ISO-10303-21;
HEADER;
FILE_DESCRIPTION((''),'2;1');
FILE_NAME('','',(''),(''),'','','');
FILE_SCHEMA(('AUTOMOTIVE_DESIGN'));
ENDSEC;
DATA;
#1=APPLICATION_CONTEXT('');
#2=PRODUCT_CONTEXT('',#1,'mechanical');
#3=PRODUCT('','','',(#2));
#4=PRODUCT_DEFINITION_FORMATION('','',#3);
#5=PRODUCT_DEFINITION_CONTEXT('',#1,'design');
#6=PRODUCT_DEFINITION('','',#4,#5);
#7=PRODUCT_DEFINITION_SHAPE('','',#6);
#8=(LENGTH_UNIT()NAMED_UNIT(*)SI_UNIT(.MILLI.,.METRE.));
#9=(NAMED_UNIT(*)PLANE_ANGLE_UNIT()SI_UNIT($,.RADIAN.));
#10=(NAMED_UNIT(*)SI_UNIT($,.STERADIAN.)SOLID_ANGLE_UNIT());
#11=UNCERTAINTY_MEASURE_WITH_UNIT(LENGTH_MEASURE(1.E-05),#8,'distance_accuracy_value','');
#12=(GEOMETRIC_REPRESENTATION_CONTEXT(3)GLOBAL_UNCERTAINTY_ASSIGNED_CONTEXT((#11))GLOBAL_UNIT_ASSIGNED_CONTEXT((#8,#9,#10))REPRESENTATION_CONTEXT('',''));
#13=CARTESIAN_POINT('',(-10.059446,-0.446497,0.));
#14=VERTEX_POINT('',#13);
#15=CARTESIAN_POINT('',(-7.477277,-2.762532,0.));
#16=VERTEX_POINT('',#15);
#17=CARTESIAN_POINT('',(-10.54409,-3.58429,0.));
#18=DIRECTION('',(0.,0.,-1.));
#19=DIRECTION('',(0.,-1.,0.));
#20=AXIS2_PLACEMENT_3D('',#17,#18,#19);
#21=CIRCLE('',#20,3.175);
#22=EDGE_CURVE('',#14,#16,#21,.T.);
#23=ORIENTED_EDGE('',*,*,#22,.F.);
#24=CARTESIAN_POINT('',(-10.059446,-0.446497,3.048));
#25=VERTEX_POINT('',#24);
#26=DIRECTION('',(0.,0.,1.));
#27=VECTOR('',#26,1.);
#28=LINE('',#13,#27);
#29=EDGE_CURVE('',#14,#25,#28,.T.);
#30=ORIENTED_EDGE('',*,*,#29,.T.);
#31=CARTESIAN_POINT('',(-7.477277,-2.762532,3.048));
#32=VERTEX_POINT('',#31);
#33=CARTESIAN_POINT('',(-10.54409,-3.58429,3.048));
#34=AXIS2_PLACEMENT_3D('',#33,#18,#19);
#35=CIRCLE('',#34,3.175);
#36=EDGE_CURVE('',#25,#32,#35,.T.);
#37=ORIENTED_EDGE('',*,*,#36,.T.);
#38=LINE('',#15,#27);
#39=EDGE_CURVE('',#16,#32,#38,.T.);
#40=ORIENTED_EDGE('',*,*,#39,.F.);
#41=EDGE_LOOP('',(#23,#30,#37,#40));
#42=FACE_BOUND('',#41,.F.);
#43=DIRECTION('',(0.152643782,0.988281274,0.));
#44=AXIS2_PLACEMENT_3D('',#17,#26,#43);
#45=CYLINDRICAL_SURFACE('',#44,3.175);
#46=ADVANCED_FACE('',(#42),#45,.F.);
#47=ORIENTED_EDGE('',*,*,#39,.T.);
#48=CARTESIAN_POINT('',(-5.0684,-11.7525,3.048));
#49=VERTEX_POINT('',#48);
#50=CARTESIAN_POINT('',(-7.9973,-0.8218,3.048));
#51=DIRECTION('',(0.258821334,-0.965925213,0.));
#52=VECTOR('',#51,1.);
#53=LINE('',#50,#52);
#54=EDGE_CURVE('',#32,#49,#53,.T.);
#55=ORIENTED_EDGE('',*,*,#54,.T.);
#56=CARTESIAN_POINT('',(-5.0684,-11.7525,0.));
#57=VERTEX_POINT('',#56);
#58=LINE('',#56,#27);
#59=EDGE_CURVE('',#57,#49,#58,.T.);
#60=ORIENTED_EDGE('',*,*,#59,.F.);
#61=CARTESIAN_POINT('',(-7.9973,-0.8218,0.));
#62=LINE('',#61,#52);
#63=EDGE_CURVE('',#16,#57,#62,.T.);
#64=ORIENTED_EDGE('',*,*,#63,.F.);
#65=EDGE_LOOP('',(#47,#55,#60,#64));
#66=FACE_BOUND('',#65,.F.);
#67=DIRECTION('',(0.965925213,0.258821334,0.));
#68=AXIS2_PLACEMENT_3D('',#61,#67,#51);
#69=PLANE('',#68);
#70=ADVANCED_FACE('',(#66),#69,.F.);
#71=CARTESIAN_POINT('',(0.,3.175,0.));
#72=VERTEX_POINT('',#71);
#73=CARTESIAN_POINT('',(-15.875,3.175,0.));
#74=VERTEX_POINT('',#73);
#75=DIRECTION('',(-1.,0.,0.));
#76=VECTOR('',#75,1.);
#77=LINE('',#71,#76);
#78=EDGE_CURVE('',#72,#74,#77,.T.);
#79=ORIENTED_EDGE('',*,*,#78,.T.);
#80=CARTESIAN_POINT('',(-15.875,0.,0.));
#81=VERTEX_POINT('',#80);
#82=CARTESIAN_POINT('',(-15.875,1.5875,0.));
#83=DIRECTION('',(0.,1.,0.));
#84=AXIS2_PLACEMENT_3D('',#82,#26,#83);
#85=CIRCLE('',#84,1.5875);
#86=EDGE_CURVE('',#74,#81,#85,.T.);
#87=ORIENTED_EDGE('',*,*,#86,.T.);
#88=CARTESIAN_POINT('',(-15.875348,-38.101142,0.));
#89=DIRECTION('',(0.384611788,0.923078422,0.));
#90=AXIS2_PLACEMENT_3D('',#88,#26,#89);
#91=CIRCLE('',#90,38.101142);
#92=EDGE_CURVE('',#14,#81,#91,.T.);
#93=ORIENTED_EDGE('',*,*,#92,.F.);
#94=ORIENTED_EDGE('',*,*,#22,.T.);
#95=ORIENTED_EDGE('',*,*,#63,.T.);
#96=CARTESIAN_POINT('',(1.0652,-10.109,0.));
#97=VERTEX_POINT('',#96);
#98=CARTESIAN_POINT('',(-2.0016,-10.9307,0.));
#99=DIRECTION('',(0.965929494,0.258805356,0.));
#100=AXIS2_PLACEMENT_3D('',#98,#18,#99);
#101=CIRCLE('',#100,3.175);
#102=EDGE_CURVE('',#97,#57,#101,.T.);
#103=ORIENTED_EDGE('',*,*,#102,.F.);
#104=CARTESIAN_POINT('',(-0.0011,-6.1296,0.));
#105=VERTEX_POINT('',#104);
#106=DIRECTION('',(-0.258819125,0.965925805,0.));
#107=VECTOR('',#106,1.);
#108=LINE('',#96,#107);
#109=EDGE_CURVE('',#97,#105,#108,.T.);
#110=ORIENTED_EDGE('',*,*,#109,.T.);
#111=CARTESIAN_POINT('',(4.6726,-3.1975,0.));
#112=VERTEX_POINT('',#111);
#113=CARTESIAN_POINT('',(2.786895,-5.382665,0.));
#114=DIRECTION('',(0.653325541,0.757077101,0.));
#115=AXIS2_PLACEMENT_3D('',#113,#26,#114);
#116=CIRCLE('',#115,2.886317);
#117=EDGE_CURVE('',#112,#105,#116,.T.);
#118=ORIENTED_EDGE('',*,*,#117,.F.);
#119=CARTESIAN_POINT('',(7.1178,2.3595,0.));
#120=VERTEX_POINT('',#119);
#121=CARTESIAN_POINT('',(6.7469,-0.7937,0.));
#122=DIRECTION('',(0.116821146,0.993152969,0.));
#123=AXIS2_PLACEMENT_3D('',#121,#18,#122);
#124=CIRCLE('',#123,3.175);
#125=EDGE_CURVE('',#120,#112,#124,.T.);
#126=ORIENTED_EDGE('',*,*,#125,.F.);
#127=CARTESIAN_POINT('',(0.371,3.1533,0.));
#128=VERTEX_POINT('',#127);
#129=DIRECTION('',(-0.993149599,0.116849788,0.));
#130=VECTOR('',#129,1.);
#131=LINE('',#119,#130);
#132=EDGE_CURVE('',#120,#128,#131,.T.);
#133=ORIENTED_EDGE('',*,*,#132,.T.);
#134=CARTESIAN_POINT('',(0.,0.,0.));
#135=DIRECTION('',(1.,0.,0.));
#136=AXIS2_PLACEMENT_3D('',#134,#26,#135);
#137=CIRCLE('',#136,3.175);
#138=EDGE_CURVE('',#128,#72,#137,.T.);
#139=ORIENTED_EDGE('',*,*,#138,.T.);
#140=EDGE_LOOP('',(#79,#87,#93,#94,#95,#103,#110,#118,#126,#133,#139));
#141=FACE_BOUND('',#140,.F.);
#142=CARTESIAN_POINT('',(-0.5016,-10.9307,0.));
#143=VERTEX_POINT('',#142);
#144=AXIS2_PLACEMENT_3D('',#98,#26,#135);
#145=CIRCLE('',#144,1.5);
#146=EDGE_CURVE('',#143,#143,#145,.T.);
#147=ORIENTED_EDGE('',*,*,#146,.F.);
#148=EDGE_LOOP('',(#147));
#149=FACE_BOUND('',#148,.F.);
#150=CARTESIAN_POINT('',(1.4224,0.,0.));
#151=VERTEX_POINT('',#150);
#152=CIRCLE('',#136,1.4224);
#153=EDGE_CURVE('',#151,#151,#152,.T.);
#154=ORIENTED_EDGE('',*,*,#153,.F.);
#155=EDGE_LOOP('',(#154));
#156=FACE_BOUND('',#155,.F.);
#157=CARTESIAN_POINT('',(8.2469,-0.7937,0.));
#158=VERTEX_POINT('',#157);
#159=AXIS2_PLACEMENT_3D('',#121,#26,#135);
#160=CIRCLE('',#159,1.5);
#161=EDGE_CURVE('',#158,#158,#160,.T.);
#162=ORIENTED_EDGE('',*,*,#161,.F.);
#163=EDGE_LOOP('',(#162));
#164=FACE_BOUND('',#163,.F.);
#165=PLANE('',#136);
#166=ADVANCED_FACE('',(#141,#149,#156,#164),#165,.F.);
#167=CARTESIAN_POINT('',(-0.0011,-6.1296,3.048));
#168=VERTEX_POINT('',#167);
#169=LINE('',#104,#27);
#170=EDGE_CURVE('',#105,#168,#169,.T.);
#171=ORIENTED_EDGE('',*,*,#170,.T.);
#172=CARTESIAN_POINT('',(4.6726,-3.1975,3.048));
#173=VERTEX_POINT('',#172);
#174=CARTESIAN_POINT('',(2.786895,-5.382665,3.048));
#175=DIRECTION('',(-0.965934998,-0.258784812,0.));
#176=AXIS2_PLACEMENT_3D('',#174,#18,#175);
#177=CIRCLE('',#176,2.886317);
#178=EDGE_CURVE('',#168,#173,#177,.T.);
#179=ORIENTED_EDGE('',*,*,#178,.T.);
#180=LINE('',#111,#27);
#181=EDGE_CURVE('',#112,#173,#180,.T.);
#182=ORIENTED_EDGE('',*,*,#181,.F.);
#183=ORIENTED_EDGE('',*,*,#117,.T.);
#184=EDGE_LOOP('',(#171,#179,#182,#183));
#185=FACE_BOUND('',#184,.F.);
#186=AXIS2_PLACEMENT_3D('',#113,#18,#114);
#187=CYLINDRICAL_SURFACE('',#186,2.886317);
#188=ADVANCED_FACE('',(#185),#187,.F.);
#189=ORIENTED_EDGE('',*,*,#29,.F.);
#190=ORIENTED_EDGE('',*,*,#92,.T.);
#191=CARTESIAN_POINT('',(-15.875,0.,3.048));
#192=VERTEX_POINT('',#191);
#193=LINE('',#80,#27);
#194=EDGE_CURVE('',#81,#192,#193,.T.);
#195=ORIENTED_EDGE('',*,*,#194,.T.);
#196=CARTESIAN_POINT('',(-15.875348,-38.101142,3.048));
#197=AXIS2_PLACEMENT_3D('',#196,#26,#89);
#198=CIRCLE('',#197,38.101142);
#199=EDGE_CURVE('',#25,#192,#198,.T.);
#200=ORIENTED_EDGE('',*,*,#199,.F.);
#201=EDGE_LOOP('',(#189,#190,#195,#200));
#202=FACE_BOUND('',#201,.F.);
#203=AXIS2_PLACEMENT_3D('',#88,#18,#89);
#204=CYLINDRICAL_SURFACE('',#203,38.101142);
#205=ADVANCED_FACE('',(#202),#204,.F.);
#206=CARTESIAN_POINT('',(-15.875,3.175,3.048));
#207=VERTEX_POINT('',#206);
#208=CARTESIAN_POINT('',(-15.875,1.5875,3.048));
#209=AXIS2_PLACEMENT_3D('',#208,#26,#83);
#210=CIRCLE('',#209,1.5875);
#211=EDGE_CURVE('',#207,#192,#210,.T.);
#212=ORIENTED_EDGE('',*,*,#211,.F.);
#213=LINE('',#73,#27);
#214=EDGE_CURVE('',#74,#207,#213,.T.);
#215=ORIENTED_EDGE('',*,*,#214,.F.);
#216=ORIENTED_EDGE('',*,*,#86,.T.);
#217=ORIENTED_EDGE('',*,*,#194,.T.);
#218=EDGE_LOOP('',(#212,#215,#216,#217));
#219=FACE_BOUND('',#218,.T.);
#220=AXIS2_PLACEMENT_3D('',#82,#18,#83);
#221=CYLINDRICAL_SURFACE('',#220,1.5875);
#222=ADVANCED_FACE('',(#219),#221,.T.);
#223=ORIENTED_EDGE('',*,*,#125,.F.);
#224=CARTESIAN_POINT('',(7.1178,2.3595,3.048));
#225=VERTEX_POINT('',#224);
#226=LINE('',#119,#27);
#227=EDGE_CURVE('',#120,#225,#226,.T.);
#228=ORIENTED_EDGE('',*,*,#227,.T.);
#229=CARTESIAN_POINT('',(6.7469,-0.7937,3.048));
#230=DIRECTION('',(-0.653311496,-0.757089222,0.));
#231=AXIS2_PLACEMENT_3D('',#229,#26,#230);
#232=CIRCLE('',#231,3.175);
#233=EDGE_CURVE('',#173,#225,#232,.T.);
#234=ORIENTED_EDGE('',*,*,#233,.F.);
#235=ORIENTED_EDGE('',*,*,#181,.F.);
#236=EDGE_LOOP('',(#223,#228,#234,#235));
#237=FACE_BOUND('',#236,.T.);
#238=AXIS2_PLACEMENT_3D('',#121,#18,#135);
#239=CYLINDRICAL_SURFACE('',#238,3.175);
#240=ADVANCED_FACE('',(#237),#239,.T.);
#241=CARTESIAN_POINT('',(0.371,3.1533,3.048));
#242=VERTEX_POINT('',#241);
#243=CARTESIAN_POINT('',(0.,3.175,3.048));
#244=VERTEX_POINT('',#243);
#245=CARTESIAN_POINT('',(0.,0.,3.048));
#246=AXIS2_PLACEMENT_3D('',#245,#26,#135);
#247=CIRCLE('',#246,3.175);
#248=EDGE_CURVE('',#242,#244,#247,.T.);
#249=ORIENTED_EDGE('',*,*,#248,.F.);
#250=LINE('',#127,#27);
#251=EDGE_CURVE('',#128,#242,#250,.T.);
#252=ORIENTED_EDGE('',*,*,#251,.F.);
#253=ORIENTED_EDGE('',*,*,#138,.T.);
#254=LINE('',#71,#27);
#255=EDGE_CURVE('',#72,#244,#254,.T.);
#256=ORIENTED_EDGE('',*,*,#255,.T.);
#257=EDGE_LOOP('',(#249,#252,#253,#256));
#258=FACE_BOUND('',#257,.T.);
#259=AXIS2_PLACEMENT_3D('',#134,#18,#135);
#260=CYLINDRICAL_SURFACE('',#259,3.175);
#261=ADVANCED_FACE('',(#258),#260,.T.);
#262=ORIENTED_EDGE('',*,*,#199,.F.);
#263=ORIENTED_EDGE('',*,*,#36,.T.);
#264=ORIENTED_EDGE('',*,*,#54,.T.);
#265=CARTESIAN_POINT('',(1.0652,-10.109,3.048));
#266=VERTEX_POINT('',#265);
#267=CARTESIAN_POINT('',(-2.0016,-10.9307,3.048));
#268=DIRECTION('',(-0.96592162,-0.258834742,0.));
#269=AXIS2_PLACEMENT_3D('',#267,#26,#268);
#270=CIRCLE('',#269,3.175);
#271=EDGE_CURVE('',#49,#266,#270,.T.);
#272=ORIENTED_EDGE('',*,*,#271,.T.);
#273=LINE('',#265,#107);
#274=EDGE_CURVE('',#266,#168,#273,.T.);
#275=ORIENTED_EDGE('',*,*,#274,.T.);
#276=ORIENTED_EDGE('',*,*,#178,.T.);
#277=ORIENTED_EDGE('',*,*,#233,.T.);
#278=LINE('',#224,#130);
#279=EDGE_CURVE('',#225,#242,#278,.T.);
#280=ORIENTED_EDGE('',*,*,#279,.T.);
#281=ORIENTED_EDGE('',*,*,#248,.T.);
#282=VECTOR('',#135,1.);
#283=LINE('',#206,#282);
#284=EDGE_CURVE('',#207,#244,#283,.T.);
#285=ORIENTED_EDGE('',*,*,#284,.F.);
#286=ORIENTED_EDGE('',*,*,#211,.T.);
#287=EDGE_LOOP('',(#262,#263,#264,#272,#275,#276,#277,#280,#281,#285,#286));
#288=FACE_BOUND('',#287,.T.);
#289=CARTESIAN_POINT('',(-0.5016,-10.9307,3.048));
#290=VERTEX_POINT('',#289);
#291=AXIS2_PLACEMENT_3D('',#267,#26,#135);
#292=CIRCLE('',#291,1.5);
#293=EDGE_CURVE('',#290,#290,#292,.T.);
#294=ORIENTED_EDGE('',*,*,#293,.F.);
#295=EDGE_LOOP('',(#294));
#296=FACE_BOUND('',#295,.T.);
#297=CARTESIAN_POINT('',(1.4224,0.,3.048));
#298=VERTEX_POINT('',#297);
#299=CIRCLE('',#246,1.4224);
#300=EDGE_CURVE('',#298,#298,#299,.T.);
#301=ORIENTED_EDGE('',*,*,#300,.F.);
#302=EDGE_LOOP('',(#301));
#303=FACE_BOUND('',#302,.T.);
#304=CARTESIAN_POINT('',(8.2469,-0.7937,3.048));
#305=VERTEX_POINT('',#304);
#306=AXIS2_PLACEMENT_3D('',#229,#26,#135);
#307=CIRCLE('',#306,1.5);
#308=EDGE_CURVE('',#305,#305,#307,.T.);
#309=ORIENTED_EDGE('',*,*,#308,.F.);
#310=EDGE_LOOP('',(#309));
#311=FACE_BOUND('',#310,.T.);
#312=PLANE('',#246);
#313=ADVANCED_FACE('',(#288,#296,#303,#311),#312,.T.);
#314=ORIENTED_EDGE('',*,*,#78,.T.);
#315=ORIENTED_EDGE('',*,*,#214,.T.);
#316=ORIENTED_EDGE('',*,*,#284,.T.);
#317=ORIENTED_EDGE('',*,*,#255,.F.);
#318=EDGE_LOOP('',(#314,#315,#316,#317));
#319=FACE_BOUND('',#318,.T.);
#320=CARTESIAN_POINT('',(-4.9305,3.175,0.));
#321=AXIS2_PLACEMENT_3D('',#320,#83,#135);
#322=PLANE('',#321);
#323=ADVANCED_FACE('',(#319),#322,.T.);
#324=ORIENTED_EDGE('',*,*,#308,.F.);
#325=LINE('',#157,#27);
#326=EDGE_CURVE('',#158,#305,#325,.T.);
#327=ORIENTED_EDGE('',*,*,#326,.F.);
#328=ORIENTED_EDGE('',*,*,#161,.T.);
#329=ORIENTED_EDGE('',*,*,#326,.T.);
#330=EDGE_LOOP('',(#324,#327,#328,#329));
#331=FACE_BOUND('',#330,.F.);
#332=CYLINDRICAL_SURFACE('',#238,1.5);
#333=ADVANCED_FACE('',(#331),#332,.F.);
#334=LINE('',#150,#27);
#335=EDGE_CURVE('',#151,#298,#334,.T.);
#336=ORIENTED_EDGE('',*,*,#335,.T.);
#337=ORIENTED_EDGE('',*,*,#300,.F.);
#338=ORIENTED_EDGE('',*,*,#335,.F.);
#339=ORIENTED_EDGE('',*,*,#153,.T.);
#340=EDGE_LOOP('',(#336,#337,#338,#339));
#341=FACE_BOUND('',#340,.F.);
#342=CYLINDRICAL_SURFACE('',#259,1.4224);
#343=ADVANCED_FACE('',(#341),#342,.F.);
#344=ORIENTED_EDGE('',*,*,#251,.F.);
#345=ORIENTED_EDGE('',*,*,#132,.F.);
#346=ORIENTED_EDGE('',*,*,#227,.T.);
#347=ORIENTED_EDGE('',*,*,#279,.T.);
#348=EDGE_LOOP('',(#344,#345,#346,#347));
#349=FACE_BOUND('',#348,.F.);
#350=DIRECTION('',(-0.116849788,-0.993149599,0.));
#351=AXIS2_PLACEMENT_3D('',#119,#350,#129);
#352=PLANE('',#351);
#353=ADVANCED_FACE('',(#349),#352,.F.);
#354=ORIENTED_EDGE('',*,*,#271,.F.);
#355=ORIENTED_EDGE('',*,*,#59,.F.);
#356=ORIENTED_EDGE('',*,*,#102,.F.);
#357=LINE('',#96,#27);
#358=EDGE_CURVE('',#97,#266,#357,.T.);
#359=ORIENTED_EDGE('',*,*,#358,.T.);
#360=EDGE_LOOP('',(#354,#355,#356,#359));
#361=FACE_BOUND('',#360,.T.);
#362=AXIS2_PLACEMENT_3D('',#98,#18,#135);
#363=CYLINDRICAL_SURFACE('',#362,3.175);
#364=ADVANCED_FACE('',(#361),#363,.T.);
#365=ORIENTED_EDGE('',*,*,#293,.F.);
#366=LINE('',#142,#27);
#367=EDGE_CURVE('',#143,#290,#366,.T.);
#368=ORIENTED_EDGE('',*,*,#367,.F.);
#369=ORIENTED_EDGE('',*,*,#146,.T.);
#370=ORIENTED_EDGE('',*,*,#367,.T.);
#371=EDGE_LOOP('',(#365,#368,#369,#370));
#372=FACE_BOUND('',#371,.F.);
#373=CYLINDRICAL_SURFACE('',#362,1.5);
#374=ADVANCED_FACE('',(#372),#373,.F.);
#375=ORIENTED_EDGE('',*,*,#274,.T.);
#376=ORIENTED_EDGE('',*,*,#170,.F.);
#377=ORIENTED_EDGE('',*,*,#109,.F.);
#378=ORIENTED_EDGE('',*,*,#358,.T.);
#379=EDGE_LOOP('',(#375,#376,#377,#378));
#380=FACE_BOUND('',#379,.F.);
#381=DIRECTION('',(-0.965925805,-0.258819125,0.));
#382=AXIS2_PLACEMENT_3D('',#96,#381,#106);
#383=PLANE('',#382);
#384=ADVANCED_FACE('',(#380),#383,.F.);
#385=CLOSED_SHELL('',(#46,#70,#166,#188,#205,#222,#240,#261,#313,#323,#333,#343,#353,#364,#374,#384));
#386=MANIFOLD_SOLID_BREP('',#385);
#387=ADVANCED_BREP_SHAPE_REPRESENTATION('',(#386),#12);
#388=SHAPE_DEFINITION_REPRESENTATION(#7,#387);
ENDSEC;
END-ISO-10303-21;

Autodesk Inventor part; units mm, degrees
ref_plane "YZ Plane" through (0, 0, 0) normal (1, 0, 0) x (0, 1, 0)
ref_plane "XZ Plane" through (0, 0, 0) normal (0, 1, 0) x (-1, 0, 0)
ref_plane "XY Plane" through (0, 0, 0) normal (0, 0, 1) x (1, 0, 0)
sketch "Sketch1" plane through (0, 0, 0) normal (0, 0, 1) x (1, 0, 0)
  circle A0 centre (0, 0) radius 1.4224
  circle A1 centre (0, 0) radius 3.175
  line L0 (0, 0) -> (-15.875, 0) construction
  circle A2 centre (-2.0016, -10.9307) radius 3.175
  circle A3 centre (-2.0016, -10.9307) radius 5 construction
  circle A4 centre (-2.0016, -10.9307) radius 1.5
  line L1 (0, 0) -> (-2.0016, -10.9307) construction
  line L2 (-2.0016, -10.9307) -> (-3.4771, -10.6606) construction
  line L3 (0, 0) -> (-2.0016, -10.9307) construction
  arc A5 (-5.0684, -10.109) -> (1.0652, -11.7525) centre (-2.0016, -10.9307) ccw
  arc A6 (-1.2212, -2.9308) -> (-15.875, 0) centre (-15.875, -38.1) ccw
  arc A7 (-15.875, 3.175) -> (-15.875, 0) centre (-15.875, 1.5875) ccw
  line L4 (-15.875, 3.175) -> (0, 3.175)
  line L5 (-2.0016, -10.9307) -> (-4.9305, 0) construction
  line L6 (1.0652, -10.109) -> (-1.8637, 0.8218)
  line L7 (-7.9973, -0.8218) -> (-5.0684, -11.7525)
  arc A8 (-5.0684, -11.7525) -> (1.0652, -10.109) centre (-2.0016, -10.9307) ccw
  arc A9 (-1.8637, 0.8218) -> (-7.9973, -0.8218) centre (-4.9305, 0) ccw
  circle A10 centre (6.7469, -0.7937) radius 3.175
  circle A11 centre (6.7469, -0.7937) radius 1.5
  line L8 (7.1178, 2.3595) -> (0.371, 3.1533)
  arc A12 (4.6726, -3.1975) -> (-0.0011, -6.1296) centre (2.7869, -5.3826) ccw
  circle A13 centre (6.7469, -0.7937) radius 5 construction
  point P0 (-5.0684, -10.109)
  point P1 (0, 3.175)
  point P2 (-7.9969, -0.8234)
  point P3 (1.0652, -10.109)
  point P4 (-0.8218, -3.0668)
  point P5 (-2.4653, 2.0008)
  point P6 (0.6312, -3.1116)
  point P7 (1.4598, -2.8195)
  point P8 (-1.4243, -1.0642)
  point P9 (-1.7024, 0.5129)
  point P10 (1.0652, -10.109)
  point P11 (-5.0684, -11.7525)
  dimension "d24" = 3
  dimension "d0" = 2.8448
  dimension "d1" = 6.35
  dimension "d9" = 15.875
  dimension "d22" = 6.35
  dimension "d23" = 10
  dimension "Arm_Length" = 11.1125
  dimension "d29" = 3.175
  dimension "d30" = 6.35
  dimension "d31" = 6.35
  dimension "d32" = 3
  dimension "d36" = 10
  dimension "Arm_Angle" = 105
  dimension "d38" = 4.7625
  dimension "d39" = 6.7469
  dimension "d40" = 0.7937
extrude "Extrusion1" add sketch "Sketch1" along normal blind 3.048
fillet "Fillet1" radius 3.175 1 edges at (-7.9969, -0.8234, 1.524)
properties part number "Lever" material "Aluminum 6061"
